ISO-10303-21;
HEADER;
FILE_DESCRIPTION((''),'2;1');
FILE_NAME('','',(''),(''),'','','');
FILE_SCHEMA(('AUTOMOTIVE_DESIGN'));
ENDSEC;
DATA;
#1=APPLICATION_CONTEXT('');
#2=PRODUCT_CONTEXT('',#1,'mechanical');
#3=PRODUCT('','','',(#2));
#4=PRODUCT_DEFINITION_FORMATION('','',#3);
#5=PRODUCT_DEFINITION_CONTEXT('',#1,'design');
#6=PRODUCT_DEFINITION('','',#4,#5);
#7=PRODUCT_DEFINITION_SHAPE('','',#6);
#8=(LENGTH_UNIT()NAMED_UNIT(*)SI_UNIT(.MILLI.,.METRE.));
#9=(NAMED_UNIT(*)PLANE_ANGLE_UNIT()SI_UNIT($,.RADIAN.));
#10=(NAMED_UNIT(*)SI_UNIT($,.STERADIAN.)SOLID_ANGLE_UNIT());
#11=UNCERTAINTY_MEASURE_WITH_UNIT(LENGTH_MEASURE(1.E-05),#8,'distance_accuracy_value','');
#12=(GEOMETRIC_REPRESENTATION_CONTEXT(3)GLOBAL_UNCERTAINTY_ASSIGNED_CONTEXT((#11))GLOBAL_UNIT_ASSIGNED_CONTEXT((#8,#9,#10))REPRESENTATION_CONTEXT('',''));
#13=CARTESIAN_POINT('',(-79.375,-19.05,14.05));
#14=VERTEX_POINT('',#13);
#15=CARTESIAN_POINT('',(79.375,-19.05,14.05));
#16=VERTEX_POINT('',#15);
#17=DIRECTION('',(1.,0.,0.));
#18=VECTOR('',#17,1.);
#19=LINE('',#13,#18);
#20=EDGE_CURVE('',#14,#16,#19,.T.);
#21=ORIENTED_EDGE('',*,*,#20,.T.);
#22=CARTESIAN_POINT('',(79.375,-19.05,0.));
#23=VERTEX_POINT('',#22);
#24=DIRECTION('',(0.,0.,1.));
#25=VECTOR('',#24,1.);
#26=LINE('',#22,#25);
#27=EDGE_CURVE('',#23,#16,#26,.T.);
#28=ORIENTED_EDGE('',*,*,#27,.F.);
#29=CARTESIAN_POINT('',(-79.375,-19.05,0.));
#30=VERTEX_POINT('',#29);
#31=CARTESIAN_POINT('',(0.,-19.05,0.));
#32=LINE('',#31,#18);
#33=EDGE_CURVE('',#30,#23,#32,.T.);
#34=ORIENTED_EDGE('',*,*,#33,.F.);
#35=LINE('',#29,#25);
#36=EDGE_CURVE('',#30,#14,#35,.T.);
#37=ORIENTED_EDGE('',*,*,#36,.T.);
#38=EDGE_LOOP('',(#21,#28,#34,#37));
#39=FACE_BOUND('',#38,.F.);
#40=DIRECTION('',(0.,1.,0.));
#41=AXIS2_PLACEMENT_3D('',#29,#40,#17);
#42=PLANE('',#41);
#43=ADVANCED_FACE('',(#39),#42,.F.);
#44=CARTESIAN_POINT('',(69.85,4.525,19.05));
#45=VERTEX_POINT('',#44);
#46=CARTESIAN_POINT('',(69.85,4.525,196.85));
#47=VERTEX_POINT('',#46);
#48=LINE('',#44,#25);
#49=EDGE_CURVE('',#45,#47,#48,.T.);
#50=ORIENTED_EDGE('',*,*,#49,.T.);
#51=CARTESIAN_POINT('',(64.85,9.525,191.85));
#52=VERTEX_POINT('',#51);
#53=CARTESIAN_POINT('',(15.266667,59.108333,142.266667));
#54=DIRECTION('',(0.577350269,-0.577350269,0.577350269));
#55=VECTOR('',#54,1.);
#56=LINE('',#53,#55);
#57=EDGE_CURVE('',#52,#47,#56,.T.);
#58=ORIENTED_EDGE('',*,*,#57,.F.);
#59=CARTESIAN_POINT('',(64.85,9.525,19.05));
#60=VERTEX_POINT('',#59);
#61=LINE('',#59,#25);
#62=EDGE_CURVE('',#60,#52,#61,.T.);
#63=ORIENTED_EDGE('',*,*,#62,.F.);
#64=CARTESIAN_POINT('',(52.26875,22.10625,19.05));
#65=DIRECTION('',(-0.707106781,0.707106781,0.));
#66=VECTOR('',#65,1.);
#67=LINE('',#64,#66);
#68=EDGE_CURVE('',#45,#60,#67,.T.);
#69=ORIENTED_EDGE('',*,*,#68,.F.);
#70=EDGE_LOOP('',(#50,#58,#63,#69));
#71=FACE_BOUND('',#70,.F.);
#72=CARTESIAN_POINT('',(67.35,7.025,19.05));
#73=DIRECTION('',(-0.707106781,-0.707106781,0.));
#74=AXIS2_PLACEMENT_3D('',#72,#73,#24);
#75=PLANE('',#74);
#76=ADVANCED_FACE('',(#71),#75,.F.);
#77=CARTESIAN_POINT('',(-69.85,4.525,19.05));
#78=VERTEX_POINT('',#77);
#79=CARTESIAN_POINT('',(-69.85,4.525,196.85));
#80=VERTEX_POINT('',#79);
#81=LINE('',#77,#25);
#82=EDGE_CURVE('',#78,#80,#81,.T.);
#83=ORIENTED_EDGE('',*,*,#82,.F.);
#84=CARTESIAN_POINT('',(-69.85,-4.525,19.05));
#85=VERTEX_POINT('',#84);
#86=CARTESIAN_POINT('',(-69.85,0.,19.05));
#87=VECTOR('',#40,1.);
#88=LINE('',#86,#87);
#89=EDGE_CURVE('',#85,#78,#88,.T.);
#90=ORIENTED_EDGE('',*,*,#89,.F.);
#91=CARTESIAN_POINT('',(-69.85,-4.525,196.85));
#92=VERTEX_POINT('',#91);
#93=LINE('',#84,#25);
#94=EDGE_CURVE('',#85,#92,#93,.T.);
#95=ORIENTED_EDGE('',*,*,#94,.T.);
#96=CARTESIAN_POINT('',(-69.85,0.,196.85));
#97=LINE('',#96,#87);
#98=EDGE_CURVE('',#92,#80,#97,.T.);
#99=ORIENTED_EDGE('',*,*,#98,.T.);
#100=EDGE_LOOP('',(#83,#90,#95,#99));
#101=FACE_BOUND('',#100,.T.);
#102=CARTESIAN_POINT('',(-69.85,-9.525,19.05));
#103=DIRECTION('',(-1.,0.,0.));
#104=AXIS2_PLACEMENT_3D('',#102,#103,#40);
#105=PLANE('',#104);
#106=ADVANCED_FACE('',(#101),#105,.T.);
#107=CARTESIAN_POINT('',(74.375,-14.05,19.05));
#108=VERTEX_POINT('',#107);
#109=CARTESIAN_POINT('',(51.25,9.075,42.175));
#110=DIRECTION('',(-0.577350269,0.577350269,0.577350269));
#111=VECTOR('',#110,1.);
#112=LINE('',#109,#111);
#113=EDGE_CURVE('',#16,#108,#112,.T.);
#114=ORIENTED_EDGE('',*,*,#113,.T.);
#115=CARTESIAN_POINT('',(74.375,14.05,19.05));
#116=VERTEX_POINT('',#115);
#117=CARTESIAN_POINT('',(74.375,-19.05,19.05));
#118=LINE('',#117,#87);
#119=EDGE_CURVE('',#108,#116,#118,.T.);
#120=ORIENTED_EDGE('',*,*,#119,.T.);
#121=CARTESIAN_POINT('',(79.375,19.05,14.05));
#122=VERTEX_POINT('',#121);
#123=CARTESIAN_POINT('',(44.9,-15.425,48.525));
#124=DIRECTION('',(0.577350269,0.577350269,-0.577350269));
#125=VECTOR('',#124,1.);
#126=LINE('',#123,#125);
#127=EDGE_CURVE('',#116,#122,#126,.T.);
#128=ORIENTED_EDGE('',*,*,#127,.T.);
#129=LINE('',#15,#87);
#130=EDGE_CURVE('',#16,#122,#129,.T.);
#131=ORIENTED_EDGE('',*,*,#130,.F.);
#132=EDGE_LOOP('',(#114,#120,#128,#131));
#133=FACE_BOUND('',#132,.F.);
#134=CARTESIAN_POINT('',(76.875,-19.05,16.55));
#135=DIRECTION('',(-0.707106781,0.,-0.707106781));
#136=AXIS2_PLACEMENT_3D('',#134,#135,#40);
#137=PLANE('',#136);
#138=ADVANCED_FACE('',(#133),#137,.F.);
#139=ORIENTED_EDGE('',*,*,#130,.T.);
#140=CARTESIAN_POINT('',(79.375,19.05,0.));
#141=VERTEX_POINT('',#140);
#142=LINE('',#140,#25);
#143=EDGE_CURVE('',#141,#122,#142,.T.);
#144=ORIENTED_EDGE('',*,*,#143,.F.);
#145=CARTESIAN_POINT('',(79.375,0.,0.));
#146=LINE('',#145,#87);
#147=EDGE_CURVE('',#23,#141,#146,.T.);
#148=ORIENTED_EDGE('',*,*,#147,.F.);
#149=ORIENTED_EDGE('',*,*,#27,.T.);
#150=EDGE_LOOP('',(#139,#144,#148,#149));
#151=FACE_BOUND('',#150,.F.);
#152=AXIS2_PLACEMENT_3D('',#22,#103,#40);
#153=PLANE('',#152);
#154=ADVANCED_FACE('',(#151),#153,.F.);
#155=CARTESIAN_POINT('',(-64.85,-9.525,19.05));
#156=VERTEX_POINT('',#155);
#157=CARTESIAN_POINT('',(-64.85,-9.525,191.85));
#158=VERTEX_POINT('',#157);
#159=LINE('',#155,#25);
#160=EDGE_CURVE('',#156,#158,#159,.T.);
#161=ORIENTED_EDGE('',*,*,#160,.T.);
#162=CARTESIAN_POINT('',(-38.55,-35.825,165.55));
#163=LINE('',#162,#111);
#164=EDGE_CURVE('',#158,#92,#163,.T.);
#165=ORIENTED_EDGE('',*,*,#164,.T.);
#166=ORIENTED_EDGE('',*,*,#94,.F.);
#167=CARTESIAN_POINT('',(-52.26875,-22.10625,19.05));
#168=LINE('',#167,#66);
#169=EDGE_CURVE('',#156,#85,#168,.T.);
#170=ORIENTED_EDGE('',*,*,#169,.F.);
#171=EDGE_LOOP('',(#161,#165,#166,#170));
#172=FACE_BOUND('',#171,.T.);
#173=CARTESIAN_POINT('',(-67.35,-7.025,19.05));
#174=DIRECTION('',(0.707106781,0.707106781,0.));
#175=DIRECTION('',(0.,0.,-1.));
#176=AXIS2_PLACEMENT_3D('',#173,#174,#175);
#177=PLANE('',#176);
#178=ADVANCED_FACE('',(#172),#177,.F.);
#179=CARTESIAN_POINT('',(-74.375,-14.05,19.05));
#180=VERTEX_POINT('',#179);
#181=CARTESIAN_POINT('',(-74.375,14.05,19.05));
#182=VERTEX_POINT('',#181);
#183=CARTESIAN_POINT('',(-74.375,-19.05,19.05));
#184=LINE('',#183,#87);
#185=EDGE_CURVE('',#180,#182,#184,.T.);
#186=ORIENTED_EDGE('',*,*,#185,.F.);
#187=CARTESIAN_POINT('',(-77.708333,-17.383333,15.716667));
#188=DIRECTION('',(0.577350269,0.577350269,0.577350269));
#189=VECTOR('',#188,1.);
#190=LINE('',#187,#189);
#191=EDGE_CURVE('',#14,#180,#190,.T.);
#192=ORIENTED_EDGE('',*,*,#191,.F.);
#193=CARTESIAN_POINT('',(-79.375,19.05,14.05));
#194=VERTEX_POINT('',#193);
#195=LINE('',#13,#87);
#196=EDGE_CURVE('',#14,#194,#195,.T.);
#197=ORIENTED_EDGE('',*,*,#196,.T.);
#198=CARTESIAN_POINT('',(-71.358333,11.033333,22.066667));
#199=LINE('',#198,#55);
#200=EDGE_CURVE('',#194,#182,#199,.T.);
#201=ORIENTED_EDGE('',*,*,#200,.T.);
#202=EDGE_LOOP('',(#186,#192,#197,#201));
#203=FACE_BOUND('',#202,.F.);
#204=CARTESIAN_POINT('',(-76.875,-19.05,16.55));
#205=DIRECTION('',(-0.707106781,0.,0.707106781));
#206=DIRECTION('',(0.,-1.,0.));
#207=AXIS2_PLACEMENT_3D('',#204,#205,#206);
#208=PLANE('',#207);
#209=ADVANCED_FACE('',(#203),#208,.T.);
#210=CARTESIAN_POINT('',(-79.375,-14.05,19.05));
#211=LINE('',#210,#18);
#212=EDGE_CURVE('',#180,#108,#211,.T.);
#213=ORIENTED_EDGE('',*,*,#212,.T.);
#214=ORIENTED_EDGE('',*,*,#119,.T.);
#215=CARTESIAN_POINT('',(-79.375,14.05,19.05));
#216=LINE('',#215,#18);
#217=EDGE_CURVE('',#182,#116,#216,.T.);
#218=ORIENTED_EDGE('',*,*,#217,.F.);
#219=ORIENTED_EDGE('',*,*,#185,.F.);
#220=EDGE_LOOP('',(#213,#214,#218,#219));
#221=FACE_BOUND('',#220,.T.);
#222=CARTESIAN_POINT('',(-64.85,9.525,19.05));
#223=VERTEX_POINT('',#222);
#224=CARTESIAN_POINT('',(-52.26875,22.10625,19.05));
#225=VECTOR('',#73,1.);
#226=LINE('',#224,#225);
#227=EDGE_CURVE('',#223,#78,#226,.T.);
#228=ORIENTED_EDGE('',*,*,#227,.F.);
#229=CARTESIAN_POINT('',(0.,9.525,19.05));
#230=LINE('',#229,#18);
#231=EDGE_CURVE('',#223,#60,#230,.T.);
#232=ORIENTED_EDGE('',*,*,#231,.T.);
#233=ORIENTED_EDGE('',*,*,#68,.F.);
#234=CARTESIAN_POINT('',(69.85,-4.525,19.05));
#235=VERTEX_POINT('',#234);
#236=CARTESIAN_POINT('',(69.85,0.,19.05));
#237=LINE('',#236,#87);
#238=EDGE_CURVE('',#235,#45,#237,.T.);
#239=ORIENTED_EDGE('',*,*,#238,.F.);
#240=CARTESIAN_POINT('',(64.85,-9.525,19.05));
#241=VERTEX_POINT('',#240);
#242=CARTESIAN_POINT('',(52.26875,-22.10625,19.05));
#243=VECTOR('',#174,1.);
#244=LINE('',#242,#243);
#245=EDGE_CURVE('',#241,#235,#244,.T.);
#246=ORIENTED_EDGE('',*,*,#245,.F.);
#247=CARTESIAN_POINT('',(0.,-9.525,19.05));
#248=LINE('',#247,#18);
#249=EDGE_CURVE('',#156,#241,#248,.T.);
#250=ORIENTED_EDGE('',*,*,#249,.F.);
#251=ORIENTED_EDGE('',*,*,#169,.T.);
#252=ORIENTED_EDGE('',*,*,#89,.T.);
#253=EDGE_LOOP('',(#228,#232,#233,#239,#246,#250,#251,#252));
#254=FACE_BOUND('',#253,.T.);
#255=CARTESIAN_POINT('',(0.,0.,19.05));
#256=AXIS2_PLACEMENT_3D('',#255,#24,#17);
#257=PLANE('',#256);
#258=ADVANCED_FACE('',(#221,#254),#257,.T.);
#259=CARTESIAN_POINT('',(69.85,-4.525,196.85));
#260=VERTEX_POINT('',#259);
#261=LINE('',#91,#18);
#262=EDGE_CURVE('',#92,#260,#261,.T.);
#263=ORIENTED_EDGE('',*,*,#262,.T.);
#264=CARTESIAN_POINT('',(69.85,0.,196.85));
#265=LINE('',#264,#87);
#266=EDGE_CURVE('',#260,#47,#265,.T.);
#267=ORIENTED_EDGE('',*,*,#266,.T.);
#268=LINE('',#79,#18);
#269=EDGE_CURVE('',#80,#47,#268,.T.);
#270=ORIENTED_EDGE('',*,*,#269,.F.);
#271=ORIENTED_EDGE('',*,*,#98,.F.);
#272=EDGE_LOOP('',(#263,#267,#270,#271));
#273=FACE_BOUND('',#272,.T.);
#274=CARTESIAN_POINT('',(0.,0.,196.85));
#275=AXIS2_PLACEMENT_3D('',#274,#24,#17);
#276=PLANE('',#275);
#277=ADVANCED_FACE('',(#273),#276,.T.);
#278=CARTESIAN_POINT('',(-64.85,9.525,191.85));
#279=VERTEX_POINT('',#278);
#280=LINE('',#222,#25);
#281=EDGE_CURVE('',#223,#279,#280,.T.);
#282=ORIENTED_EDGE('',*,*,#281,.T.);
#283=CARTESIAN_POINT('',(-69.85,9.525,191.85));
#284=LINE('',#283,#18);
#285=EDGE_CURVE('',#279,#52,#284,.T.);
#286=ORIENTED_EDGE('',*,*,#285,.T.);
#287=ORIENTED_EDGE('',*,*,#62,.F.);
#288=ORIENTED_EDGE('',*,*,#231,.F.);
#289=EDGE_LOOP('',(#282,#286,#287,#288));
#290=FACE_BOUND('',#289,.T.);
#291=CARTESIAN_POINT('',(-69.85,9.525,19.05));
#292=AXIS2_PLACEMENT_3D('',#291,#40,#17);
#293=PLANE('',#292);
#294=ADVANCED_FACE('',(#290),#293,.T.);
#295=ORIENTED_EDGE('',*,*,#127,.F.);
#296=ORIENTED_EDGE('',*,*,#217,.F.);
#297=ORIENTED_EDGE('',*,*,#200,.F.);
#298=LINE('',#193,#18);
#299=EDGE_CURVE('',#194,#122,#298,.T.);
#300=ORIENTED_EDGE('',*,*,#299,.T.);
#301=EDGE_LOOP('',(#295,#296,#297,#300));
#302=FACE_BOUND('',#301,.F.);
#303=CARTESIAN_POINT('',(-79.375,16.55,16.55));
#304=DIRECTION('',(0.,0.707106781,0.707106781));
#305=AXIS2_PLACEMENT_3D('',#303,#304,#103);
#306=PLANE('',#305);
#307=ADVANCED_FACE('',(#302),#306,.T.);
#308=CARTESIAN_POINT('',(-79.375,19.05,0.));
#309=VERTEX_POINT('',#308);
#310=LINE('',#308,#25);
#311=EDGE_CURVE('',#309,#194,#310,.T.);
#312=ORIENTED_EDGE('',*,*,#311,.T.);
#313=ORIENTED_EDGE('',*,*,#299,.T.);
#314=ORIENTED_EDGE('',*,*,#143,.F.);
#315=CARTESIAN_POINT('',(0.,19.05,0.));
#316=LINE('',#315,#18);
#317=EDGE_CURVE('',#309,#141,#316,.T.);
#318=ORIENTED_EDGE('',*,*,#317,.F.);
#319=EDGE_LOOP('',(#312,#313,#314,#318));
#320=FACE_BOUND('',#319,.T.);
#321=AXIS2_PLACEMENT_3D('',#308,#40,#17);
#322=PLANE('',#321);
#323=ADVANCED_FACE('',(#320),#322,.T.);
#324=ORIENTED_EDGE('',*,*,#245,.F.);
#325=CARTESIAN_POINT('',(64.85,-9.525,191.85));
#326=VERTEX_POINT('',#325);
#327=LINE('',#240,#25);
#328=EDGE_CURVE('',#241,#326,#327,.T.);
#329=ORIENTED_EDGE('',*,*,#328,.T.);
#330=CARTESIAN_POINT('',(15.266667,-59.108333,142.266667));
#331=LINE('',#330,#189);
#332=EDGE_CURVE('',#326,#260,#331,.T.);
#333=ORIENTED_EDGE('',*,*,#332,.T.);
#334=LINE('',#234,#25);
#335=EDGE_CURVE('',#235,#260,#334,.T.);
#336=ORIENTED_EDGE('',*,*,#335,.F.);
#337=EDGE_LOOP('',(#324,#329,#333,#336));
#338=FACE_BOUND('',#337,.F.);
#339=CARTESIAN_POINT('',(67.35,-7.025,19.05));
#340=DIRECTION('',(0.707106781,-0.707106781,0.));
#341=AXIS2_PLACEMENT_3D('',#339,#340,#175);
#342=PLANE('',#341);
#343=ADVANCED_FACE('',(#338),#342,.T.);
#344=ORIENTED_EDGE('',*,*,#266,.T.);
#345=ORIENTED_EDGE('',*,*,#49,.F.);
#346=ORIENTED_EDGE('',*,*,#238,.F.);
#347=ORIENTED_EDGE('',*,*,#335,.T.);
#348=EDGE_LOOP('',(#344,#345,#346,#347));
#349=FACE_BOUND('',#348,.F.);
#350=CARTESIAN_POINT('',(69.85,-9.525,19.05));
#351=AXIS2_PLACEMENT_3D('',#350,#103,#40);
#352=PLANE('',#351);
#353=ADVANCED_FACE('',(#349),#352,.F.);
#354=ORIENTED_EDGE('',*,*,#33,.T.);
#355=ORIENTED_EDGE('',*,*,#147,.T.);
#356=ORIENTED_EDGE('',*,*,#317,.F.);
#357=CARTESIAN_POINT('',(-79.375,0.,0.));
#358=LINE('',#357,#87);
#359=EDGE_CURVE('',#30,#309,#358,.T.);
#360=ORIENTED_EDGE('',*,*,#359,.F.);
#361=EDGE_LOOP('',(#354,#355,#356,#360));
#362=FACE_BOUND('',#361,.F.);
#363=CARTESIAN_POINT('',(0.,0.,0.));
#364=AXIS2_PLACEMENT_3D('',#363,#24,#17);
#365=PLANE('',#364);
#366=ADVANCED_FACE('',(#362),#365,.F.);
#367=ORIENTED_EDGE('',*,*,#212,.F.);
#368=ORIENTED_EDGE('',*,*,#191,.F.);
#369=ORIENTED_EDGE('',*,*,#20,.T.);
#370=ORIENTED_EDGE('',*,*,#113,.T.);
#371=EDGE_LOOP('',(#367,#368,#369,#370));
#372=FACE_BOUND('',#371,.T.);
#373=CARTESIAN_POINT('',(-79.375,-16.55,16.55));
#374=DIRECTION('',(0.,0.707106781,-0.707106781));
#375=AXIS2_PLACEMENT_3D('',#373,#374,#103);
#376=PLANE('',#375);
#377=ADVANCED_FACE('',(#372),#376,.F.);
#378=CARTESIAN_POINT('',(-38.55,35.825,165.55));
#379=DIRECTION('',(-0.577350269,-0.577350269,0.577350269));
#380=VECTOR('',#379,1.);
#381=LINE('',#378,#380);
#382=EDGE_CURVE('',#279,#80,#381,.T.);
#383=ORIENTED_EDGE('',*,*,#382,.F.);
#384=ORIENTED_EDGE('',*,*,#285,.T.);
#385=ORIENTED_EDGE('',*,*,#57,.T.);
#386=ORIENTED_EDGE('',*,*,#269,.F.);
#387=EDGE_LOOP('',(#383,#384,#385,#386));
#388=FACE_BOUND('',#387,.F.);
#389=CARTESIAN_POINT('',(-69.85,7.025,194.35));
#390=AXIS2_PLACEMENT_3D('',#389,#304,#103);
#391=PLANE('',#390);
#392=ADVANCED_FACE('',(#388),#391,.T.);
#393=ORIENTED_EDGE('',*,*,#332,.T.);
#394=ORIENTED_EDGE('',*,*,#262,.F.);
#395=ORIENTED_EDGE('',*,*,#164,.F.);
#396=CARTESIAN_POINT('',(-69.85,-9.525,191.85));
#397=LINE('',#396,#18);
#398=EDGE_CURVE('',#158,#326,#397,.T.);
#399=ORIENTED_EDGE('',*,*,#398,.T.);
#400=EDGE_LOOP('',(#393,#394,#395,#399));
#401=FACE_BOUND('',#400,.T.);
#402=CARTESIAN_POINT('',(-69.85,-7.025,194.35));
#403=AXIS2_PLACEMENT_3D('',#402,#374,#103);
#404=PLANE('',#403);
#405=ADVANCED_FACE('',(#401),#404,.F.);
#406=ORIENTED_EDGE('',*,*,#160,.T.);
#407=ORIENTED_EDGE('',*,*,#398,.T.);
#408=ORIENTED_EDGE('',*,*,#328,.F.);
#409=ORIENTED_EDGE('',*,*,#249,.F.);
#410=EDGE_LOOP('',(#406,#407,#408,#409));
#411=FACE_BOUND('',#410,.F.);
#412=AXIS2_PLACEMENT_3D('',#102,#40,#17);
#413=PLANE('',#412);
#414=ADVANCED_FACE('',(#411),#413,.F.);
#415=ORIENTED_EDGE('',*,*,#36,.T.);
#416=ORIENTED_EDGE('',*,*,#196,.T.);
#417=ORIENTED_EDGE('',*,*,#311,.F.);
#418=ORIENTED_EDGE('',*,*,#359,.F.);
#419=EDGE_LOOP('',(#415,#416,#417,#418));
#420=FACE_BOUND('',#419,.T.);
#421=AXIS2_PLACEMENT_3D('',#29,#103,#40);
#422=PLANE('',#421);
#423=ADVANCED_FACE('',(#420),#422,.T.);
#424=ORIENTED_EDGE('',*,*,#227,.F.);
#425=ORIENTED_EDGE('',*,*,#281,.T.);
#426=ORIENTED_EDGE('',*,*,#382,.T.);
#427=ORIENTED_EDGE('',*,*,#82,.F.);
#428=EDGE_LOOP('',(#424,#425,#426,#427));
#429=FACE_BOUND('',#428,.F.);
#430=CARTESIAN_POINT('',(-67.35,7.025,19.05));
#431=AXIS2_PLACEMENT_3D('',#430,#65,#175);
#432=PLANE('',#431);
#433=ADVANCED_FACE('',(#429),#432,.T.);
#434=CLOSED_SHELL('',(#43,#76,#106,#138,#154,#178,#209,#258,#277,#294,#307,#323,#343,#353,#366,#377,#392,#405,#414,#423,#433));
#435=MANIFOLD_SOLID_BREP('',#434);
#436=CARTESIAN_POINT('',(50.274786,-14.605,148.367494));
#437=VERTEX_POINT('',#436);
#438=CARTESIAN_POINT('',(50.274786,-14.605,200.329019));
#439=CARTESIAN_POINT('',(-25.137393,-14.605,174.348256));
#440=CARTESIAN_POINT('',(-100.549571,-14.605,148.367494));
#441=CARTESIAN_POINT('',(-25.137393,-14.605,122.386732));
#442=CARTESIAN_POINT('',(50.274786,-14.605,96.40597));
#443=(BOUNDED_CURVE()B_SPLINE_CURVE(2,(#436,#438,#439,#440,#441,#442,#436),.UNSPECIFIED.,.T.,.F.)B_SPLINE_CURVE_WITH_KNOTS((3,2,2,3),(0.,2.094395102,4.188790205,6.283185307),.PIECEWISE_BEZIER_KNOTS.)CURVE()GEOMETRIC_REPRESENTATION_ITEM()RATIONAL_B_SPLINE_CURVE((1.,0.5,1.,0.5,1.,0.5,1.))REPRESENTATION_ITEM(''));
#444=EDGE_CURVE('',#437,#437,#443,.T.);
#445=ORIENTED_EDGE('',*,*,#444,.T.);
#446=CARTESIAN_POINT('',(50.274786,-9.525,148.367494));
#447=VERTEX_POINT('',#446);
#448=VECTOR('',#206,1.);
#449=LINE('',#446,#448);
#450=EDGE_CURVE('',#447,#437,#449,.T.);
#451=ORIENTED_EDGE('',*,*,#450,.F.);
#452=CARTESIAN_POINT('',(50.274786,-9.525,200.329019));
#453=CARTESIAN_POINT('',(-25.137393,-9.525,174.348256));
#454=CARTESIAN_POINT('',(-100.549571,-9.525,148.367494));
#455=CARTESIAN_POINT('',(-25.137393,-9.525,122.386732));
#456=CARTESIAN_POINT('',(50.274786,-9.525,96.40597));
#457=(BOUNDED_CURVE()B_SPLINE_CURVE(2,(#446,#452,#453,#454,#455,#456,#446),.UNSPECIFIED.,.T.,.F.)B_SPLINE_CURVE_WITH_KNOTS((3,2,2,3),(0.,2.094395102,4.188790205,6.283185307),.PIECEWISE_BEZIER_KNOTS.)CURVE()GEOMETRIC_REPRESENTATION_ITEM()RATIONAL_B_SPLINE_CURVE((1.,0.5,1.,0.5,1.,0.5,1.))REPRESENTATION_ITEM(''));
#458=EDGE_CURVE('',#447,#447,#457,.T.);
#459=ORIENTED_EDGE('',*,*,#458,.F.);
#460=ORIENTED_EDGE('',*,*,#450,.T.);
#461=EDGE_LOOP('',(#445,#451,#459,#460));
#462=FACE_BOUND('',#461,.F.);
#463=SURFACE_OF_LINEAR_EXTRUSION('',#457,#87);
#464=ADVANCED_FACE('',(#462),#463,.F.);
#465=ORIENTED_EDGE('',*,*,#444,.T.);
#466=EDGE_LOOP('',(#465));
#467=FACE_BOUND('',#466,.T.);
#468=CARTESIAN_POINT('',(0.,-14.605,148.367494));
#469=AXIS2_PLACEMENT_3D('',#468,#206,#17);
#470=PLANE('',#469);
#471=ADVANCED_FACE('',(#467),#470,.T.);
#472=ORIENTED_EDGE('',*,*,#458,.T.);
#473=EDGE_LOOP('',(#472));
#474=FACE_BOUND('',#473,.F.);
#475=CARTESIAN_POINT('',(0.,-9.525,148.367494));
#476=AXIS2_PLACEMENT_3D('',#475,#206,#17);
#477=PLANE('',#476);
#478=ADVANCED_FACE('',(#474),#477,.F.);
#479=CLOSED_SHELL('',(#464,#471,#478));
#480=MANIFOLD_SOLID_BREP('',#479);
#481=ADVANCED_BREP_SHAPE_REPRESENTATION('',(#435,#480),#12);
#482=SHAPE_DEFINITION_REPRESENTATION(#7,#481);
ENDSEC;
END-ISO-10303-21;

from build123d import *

# Parameters (mm, degrees)
F0_W     = 158.75
F0_H     = 38.1
F1_DEPTH = 19.05
F2_W     = 139.7
F2_H     = 19.05
F3_DEPTH = 177.8
F4_SIZE  = 5
F6_DEPTH = 5.08


with BuildPart() as f1:
    # F0 (on Top) → F1 (new body)
    with BuildSketch(Plane.XY):
        Rectangle(F0_W, F0_H)
    extrude(amount=F1_DEPTH)

    # F2 (on face) → F3 (join)
    with BuildSketch(Plane.XY.offset(19.05)):
        Rectangle(F2_W, F2_H)
    extrude(amount=F3_DEPTH)

    # F4
    f4_edges = [f1.edges().sort_by_distance(p)[0] for p in [
        (0, -19.05, 19.05),
        (-79.375, 0, 19.05),
        (79.375, 0, 19.05),
        (0, 19.05, 19.05),
        (-69.85, -9.525, 107.95),
        (-69.85, 9.525, 107.95),
        (0, -9.525, 196.85),
        (0, 9.525, 196.85),
        (69.85, -9.525, 107.95),
        (69.85, 9.525, 107.95),
    ]]
    chamfer(f4_edges, length=F4_SIZE)


with BuildPart() as f6:
    # F5 (on face) → F6 (new body)
    with BuildSketch(Plane.XZ.offset(9.525)):
        with BuildLine():
            add(Edge.make_bspline(
                [(50.2747856081, 148.3674943447), (50.2747856081, 200.3290185718), (-25.137392804, 174.3482564582), (-100.5495712161, 148.3674943447), (-25.137392804, 122.3867322312), (50.2747856081, 96.4059701176), (50.2747856081, 148.3674943447)],
                knots=[0, 0, 0, 2.0943951024, 2.0943951024, 4.1887902048, 4.1887902048, 6.2831853072, 6.2831853072, 6.2831853072], degree=2, weights=[1, 0.5, 1, 0.5, 1, 0.5, 1]))
        make_face()
    extrude(amount=F6_DEPTH)


solid = Compound([f1.part, f6.part])
